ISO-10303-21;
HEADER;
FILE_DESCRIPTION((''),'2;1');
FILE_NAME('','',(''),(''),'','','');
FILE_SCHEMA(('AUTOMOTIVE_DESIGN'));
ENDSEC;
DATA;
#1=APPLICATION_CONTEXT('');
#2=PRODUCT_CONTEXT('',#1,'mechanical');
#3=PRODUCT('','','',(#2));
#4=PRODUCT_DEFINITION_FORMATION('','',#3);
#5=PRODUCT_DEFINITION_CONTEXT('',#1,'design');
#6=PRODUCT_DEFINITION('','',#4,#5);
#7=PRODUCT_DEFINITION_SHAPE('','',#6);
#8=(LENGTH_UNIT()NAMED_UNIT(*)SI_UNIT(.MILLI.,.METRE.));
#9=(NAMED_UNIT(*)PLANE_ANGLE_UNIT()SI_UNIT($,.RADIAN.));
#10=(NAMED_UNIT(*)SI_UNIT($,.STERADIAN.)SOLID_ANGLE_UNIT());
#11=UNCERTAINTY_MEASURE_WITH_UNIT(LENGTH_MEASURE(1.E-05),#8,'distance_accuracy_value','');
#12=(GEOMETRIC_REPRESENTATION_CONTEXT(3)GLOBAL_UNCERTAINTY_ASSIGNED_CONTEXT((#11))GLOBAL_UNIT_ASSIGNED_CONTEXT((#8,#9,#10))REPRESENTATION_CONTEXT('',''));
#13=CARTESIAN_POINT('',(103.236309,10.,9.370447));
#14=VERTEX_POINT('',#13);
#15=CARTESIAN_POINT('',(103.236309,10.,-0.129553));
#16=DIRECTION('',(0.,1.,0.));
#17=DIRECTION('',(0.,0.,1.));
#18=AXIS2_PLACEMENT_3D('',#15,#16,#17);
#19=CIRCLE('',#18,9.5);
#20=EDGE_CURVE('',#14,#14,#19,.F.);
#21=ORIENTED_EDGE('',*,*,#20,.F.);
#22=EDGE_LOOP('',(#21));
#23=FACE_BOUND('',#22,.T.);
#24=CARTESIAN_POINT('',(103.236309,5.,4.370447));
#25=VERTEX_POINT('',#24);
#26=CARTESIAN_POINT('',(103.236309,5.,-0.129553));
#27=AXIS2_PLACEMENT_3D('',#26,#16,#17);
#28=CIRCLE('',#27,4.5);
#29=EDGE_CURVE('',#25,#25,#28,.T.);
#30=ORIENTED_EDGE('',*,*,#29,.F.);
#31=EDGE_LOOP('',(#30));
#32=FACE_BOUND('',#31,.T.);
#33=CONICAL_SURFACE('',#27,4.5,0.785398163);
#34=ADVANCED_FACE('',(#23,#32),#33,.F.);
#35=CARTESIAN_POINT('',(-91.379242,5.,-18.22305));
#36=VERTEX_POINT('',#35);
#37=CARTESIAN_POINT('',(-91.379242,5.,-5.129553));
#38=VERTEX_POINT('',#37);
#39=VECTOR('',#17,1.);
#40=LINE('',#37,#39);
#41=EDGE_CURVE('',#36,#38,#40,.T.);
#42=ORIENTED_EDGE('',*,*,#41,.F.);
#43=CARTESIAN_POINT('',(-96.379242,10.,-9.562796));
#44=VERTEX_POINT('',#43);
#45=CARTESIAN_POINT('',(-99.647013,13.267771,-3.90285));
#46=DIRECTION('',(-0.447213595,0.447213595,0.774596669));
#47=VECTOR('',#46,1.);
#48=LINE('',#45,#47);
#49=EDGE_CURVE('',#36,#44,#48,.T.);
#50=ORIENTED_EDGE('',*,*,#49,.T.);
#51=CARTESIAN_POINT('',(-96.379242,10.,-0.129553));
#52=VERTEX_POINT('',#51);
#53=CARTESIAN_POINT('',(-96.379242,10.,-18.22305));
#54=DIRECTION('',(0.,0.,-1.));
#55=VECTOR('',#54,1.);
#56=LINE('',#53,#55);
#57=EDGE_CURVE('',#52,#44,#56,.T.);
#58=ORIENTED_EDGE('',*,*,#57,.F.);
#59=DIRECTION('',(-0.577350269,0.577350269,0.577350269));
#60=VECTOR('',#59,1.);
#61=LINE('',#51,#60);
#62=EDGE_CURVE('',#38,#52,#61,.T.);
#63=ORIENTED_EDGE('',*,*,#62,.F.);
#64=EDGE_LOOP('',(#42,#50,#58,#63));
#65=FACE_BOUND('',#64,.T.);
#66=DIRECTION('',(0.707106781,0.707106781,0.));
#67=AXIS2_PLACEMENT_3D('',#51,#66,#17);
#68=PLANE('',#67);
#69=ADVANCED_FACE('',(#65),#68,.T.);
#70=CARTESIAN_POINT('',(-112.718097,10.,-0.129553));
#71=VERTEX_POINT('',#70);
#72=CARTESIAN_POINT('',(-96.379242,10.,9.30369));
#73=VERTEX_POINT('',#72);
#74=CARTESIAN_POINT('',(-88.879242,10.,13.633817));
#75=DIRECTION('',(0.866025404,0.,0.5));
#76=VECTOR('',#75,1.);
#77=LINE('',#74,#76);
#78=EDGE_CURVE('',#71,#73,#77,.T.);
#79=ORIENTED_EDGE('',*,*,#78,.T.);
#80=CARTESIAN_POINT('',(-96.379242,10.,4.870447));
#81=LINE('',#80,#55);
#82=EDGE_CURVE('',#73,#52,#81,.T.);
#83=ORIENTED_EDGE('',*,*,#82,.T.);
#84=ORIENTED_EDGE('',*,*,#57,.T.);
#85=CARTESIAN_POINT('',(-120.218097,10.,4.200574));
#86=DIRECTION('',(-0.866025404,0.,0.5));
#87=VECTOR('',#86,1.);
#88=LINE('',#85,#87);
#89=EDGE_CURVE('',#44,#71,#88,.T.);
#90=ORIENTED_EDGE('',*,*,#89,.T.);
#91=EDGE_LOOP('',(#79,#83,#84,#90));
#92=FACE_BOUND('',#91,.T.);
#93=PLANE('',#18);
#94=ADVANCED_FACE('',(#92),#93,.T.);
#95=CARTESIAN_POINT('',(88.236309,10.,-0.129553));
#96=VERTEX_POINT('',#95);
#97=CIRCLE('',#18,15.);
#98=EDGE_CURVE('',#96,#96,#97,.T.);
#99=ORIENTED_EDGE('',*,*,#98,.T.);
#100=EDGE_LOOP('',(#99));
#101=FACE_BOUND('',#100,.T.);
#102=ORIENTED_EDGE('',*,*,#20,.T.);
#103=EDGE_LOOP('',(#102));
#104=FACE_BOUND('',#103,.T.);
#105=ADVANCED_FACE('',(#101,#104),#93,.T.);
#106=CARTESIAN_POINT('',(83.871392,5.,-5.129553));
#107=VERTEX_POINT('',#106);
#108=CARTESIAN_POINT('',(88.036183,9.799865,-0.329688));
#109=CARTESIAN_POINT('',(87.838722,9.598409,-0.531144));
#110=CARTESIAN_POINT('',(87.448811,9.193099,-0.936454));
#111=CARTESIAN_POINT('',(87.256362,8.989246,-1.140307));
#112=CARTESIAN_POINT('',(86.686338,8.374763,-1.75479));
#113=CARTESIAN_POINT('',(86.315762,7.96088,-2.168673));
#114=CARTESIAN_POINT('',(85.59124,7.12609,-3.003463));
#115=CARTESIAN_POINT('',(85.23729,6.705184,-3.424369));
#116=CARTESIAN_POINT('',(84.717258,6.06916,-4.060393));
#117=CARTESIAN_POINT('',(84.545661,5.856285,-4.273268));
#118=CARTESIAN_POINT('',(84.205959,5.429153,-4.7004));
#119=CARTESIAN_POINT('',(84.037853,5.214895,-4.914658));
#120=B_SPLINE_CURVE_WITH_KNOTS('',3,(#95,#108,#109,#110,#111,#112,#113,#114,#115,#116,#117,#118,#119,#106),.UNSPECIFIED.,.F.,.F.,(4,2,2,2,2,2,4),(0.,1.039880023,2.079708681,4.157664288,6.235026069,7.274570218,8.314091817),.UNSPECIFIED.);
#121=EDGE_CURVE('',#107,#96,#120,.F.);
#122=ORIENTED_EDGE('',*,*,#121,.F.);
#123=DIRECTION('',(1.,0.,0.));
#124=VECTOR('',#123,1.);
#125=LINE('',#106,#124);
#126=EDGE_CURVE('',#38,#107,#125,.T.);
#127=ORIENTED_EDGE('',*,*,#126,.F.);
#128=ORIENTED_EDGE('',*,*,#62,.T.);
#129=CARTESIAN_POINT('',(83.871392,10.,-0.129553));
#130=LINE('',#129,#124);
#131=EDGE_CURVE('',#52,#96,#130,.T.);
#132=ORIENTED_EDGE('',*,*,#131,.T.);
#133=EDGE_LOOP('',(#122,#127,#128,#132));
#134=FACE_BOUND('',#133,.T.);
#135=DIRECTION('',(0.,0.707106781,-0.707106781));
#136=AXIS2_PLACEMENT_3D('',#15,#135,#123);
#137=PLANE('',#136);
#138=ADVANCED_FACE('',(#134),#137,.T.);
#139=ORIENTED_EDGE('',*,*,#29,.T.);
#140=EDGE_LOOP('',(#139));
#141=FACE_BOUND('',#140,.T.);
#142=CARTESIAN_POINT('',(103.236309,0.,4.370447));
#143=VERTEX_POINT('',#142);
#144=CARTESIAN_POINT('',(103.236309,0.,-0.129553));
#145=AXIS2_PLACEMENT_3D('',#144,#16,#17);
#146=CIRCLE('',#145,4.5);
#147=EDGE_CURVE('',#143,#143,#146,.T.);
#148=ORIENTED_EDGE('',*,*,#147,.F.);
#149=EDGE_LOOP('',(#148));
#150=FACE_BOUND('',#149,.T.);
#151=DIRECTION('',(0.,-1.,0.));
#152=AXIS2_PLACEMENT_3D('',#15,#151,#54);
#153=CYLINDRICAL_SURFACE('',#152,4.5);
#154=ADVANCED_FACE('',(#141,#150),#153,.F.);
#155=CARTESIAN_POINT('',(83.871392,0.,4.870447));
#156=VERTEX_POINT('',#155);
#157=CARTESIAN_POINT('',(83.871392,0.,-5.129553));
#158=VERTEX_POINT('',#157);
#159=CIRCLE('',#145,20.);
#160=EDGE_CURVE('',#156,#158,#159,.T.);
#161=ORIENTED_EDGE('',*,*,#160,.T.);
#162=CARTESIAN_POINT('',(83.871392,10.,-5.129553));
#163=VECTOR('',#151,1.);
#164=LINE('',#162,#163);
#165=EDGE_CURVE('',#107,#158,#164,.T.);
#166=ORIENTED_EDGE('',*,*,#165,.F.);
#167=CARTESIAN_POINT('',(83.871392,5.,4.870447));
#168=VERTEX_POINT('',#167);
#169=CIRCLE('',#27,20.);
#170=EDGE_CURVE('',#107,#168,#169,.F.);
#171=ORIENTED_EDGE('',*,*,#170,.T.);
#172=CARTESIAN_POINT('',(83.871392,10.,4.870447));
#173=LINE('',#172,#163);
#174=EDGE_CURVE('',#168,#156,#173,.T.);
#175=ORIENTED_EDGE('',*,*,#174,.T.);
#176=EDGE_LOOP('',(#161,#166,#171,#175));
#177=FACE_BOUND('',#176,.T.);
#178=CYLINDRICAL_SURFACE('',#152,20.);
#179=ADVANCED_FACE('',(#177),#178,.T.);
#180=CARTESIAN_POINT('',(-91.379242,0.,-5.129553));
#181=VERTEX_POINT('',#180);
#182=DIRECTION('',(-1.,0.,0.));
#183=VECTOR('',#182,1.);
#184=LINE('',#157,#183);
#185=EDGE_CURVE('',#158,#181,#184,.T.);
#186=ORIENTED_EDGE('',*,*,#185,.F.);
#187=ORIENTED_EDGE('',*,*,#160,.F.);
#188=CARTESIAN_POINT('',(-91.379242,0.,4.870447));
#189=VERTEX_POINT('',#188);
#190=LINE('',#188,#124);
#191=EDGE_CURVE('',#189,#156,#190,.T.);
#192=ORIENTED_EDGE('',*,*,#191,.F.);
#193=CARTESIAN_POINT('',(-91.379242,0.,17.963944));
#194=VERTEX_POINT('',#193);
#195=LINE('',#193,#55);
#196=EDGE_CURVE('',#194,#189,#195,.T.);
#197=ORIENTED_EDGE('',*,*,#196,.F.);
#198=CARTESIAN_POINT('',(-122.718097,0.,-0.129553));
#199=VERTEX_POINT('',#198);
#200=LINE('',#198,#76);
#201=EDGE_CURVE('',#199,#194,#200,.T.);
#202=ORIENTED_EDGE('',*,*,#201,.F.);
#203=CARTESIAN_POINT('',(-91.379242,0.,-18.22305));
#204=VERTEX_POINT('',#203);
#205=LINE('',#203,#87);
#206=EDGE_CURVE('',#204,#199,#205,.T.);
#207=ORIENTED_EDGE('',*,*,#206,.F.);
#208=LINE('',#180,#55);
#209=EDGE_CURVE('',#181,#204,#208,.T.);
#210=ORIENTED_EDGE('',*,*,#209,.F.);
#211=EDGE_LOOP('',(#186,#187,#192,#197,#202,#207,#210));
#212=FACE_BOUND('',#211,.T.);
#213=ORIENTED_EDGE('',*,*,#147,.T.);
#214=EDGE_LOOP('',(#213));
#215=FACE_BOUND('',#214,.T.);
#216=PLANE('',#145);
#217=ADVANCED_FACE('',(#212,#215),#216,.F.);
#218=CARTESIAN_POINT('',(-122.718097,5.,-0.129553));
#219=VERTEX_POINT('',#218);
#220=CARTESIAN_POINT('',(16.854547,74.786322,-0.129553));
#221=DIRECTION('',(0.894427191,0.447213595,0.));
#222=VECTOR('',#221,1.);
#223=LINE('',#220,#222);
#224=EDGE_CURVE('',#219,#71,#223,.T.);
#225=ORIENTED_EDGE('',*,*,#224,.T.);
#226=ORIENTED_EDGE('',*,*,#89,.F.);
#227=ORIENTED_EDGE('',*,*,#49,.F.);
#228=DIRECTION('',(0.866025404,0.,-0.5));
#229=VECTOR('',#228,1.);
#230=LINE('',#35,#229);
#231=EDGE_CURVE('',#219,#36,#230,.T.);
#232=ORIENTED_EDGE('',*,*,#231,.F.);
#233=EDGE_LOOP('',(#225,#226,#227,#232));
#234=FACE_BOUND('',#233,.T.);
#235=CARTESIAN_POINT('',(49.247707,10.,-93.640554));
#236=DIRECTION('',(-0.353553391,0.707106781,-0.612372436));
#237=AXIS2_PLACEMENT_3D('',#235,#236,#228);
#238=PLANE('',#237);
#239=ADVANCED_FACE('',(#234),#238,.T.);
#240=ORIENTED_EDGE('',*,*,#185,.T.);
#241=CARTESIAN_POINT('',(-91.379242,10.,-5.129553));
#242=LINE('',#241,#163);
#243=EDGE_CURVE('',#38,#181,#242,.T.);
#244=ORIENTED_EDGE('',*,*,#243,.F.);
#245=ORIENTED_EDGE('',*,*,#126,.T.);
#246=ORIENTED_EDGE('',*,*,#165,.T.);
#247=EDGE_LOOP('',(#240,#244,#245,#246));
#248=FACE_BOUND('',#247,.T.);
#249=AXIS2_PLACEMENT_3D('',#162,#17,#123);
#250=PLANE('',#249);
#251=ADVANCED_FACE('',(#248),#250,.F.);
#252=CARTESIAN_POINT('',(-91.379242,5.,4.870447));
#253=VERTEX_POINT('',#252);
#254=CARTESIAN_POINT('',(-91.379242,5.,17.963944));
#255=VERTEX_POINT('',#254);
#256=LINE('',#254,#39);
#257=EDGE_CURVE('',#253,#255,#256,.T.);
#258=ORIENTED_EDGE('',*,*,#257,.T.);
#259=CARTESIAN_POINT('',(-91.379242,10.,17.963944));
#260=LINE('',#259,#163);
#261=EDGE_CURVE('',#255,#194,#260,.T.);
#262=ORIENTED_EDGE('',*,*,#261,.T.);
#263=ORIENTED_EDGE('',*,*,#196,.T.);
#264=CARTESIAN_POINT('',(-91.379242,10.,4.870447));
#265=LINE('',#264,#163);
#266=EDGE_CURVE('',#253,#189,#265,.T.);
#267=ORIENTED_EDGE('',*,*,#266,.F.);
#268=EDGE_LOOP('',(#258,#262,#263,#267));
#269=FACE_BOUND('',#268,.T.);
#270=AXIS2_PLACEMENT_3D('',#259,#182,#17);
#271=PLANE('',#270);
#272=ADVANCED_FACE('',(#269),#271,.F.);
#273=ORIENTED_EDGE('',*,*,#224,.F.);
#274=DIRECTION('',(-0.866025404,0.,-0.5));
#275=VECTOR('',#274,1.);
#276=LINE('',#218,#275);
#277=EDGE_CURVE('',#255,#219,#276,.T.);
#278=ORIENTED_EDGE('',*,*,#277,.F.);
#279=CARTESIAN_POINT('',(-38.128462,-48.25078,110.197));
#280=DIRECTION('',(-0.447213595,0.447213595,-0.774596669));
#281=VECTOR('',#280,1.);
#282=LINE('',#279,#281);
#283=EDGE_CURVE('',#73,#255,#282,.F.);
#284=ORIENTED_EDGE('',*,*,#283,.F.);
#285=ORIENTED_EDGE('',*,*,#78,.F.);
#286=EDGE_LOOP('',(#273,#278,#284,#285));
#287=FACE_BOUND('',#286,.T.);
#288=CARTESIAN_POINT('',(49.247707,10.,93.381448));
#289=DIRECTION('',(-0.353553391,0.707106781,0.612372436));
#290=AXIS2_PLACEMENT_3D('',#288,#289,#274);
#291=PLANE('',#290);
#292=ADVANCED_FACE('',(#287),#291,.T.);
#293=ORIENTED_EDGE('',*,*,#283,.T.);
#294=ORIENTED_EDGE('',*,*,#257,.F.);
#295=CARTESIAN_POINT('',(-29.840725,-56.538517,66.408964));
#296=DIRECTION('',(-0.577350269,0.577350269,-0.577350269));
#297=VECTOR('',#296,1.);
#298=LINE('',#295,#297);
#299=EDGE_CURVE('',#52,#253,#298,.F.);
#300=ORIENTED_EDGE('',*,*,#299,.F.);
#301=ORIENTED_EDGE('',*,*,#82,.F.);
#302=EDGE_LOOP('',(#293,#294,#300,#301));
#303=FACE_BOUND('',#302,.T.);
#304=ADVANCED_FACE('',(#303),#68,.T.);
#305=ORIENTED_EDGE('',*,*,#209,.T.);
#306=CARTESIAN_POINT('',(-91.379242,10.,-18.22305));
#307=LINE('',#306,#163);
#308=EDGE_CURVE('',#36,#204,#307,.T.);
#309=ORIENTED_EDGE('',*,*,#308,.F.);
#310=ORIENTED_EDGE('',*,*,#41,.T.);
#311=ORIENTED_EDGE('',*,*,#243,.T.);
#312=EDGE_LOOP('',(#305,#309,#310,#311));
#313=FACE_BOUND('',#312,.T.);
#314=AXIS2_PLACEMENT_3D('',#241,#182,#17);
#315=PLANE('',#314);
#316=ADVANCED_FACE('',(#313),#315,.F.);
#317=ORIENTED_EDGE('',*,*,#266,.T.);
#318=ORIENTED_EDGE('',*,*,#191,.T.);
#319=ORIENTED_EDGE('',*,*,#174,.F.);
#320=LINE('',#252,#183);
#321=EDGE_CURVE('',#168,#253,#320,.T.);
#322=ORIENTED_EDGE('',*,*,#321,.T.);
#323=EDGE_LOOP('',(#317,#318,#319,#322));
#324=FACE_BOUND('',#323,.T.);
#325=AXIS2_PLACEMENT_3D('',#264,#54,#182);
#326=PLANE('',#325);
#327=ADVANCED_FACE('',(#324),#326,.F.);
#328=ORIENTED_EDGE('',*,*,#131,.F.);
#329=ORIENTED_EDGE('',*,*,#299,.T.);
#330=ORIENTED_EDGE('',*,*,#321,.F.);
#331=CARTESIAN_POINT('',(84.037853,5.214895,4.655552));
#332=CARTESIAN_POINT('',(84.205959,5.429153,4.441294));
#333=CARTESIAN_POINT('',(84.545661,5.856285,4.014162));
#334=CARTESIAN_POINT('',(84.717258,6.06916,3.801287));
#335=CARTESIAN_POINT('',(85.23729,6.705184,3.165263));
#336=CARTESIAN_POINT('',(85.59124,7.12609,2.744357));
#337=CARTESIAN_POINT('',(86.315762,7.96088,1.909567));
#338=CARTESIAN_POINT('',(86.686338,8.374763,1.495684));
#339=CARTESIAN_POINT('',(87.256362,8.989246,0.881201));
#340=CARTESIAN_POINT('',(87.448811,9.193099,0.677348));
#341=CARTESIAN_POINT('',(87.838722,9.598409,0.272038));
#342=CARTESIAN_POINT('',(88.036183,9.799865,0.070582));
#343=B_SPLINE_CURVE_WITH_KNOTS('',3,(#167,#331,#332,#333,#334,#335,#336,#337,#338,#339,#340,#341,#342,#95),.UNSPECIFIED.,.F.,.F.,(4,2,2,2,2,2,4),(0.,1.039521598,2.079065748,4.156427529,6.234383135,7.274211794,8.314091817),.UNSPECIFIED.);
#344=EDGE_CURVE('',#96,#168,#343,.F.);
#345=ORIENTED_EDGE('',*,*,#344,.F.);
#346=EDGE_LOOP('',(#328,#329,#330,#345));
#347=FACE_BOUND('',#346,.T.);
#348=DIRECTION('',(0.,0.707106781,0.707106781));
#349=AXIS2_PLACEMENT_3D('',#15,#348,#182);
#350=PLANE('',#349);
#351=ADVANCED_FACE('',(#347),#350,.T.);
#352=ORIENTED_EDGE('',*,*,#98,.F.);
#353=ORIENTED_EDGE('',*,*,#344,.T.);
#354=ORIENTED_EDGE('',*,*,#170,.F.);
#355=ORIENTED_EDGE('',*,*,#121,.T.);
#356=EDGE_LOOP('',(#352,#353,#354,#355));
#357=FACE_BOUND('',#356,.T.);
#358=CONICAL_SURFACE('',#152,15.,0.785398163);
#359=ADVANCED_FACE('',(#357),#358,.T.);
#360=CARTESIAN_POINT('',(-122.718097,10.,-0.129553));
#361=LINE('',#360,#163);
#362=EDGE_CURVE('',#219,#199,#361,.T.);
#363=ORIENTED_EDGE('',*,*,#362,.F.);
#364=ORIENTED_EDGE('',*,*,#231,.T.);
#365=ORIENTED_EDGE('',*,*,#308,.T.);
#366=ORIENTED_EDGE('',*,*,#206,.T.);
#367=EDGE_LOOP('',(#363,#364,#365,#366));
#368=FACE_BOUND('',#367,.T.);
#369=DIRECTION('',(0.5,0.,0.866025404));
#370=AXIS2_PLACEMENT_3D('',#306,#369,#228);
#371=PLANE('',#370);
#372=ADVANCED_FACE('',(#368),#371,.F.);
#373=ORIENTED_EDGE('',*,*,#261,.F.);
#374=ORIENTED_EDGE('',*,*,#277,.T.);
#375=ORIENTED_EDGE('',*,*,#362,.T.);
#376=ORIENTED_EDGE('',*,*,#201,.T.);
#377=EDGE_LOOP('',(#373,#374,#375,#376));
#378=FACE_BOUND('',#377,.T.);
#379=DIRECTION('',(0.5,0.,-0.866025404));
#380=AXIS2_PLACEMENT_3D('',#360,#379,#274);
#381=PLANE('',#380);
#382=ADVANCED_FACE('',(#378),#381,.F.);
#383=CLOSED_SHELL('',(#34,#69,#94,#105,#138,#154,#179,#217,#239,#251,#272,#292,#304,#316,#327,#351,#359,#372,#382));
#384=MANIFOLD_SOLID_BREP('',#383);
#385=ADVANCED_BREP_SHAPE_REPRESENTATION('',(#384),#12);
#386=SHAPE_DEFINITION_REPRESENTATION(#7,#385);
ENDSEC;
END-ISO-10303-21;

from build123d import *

# Parameters (mm, degrees)
CROQUIS2_R              = 4.5
SALIENTE_EXTRUIR2_DEPTH = 10
CHAFL_N1_SIZE           = 5


with BuildPart() as part:
    # Croquis2 → Saliente-Extruir2 (new body)
    with BuildSketch(Plane(origin=(0, 0, 0), x_dir=(1, 0, 0), z_dir=(0, 1, 0))):
        with BuildLine():
            Line((-91.379241818, 5.129552955), (-91.379241818, 18.223049557))
            Line((-91.379241818, 18.223049557), (-122.718097219, 0.129552955))
            Line((-122.718097219, 0.129552955), (-91.379241818, -17.963943646))
            Line((-91.379241818, -17.963943646), (-91.379241818, -4.870447045))
            Line((-91.379241818, -4.870447045), (83.871392309, -4.870447045))
            ThreePointArc((83.871392309, -4.870447045), (123.23630904, 0.129552955), (83.871392309, 5.129552955))
            Line((83.871392309, 5.129552955), (-91.379241818, 5.129552955))
        make_face()
        with Locations(Location((103.23630904, 0.129552955, 0), (0, 0, 270))):
            Circle(CROQUIS2_R, mode=Mode.SUBTRACT)
    extrude(amount=SALIENTE_EXTRUIR2_DEPTH)

    # Chaflán1
    chafl_n1_edges = [part.edges().sort_by_distance(p)[0] for p in [
        (-107.048669518, 10, -9.176301256),
        (-107.048669518, 10, 8.917195345),
        (103.23630904, 10, -4.629552955),
        (-91.379241818, 10, 11.417195345),
        (-3.753924755, 10, 4.870447045),
        (123.23630904, 10, -0.129552955),
        (-3.753924755, 10, -5.129552955),
        (-91.379241818, 10, -11.676301256),
    ]]
    chamfer(chafl_n1_edges, length=CHAFL_N1_SIZE - 0.0001)  # a hair under: the kernel refuses the full size


solid = part.part
